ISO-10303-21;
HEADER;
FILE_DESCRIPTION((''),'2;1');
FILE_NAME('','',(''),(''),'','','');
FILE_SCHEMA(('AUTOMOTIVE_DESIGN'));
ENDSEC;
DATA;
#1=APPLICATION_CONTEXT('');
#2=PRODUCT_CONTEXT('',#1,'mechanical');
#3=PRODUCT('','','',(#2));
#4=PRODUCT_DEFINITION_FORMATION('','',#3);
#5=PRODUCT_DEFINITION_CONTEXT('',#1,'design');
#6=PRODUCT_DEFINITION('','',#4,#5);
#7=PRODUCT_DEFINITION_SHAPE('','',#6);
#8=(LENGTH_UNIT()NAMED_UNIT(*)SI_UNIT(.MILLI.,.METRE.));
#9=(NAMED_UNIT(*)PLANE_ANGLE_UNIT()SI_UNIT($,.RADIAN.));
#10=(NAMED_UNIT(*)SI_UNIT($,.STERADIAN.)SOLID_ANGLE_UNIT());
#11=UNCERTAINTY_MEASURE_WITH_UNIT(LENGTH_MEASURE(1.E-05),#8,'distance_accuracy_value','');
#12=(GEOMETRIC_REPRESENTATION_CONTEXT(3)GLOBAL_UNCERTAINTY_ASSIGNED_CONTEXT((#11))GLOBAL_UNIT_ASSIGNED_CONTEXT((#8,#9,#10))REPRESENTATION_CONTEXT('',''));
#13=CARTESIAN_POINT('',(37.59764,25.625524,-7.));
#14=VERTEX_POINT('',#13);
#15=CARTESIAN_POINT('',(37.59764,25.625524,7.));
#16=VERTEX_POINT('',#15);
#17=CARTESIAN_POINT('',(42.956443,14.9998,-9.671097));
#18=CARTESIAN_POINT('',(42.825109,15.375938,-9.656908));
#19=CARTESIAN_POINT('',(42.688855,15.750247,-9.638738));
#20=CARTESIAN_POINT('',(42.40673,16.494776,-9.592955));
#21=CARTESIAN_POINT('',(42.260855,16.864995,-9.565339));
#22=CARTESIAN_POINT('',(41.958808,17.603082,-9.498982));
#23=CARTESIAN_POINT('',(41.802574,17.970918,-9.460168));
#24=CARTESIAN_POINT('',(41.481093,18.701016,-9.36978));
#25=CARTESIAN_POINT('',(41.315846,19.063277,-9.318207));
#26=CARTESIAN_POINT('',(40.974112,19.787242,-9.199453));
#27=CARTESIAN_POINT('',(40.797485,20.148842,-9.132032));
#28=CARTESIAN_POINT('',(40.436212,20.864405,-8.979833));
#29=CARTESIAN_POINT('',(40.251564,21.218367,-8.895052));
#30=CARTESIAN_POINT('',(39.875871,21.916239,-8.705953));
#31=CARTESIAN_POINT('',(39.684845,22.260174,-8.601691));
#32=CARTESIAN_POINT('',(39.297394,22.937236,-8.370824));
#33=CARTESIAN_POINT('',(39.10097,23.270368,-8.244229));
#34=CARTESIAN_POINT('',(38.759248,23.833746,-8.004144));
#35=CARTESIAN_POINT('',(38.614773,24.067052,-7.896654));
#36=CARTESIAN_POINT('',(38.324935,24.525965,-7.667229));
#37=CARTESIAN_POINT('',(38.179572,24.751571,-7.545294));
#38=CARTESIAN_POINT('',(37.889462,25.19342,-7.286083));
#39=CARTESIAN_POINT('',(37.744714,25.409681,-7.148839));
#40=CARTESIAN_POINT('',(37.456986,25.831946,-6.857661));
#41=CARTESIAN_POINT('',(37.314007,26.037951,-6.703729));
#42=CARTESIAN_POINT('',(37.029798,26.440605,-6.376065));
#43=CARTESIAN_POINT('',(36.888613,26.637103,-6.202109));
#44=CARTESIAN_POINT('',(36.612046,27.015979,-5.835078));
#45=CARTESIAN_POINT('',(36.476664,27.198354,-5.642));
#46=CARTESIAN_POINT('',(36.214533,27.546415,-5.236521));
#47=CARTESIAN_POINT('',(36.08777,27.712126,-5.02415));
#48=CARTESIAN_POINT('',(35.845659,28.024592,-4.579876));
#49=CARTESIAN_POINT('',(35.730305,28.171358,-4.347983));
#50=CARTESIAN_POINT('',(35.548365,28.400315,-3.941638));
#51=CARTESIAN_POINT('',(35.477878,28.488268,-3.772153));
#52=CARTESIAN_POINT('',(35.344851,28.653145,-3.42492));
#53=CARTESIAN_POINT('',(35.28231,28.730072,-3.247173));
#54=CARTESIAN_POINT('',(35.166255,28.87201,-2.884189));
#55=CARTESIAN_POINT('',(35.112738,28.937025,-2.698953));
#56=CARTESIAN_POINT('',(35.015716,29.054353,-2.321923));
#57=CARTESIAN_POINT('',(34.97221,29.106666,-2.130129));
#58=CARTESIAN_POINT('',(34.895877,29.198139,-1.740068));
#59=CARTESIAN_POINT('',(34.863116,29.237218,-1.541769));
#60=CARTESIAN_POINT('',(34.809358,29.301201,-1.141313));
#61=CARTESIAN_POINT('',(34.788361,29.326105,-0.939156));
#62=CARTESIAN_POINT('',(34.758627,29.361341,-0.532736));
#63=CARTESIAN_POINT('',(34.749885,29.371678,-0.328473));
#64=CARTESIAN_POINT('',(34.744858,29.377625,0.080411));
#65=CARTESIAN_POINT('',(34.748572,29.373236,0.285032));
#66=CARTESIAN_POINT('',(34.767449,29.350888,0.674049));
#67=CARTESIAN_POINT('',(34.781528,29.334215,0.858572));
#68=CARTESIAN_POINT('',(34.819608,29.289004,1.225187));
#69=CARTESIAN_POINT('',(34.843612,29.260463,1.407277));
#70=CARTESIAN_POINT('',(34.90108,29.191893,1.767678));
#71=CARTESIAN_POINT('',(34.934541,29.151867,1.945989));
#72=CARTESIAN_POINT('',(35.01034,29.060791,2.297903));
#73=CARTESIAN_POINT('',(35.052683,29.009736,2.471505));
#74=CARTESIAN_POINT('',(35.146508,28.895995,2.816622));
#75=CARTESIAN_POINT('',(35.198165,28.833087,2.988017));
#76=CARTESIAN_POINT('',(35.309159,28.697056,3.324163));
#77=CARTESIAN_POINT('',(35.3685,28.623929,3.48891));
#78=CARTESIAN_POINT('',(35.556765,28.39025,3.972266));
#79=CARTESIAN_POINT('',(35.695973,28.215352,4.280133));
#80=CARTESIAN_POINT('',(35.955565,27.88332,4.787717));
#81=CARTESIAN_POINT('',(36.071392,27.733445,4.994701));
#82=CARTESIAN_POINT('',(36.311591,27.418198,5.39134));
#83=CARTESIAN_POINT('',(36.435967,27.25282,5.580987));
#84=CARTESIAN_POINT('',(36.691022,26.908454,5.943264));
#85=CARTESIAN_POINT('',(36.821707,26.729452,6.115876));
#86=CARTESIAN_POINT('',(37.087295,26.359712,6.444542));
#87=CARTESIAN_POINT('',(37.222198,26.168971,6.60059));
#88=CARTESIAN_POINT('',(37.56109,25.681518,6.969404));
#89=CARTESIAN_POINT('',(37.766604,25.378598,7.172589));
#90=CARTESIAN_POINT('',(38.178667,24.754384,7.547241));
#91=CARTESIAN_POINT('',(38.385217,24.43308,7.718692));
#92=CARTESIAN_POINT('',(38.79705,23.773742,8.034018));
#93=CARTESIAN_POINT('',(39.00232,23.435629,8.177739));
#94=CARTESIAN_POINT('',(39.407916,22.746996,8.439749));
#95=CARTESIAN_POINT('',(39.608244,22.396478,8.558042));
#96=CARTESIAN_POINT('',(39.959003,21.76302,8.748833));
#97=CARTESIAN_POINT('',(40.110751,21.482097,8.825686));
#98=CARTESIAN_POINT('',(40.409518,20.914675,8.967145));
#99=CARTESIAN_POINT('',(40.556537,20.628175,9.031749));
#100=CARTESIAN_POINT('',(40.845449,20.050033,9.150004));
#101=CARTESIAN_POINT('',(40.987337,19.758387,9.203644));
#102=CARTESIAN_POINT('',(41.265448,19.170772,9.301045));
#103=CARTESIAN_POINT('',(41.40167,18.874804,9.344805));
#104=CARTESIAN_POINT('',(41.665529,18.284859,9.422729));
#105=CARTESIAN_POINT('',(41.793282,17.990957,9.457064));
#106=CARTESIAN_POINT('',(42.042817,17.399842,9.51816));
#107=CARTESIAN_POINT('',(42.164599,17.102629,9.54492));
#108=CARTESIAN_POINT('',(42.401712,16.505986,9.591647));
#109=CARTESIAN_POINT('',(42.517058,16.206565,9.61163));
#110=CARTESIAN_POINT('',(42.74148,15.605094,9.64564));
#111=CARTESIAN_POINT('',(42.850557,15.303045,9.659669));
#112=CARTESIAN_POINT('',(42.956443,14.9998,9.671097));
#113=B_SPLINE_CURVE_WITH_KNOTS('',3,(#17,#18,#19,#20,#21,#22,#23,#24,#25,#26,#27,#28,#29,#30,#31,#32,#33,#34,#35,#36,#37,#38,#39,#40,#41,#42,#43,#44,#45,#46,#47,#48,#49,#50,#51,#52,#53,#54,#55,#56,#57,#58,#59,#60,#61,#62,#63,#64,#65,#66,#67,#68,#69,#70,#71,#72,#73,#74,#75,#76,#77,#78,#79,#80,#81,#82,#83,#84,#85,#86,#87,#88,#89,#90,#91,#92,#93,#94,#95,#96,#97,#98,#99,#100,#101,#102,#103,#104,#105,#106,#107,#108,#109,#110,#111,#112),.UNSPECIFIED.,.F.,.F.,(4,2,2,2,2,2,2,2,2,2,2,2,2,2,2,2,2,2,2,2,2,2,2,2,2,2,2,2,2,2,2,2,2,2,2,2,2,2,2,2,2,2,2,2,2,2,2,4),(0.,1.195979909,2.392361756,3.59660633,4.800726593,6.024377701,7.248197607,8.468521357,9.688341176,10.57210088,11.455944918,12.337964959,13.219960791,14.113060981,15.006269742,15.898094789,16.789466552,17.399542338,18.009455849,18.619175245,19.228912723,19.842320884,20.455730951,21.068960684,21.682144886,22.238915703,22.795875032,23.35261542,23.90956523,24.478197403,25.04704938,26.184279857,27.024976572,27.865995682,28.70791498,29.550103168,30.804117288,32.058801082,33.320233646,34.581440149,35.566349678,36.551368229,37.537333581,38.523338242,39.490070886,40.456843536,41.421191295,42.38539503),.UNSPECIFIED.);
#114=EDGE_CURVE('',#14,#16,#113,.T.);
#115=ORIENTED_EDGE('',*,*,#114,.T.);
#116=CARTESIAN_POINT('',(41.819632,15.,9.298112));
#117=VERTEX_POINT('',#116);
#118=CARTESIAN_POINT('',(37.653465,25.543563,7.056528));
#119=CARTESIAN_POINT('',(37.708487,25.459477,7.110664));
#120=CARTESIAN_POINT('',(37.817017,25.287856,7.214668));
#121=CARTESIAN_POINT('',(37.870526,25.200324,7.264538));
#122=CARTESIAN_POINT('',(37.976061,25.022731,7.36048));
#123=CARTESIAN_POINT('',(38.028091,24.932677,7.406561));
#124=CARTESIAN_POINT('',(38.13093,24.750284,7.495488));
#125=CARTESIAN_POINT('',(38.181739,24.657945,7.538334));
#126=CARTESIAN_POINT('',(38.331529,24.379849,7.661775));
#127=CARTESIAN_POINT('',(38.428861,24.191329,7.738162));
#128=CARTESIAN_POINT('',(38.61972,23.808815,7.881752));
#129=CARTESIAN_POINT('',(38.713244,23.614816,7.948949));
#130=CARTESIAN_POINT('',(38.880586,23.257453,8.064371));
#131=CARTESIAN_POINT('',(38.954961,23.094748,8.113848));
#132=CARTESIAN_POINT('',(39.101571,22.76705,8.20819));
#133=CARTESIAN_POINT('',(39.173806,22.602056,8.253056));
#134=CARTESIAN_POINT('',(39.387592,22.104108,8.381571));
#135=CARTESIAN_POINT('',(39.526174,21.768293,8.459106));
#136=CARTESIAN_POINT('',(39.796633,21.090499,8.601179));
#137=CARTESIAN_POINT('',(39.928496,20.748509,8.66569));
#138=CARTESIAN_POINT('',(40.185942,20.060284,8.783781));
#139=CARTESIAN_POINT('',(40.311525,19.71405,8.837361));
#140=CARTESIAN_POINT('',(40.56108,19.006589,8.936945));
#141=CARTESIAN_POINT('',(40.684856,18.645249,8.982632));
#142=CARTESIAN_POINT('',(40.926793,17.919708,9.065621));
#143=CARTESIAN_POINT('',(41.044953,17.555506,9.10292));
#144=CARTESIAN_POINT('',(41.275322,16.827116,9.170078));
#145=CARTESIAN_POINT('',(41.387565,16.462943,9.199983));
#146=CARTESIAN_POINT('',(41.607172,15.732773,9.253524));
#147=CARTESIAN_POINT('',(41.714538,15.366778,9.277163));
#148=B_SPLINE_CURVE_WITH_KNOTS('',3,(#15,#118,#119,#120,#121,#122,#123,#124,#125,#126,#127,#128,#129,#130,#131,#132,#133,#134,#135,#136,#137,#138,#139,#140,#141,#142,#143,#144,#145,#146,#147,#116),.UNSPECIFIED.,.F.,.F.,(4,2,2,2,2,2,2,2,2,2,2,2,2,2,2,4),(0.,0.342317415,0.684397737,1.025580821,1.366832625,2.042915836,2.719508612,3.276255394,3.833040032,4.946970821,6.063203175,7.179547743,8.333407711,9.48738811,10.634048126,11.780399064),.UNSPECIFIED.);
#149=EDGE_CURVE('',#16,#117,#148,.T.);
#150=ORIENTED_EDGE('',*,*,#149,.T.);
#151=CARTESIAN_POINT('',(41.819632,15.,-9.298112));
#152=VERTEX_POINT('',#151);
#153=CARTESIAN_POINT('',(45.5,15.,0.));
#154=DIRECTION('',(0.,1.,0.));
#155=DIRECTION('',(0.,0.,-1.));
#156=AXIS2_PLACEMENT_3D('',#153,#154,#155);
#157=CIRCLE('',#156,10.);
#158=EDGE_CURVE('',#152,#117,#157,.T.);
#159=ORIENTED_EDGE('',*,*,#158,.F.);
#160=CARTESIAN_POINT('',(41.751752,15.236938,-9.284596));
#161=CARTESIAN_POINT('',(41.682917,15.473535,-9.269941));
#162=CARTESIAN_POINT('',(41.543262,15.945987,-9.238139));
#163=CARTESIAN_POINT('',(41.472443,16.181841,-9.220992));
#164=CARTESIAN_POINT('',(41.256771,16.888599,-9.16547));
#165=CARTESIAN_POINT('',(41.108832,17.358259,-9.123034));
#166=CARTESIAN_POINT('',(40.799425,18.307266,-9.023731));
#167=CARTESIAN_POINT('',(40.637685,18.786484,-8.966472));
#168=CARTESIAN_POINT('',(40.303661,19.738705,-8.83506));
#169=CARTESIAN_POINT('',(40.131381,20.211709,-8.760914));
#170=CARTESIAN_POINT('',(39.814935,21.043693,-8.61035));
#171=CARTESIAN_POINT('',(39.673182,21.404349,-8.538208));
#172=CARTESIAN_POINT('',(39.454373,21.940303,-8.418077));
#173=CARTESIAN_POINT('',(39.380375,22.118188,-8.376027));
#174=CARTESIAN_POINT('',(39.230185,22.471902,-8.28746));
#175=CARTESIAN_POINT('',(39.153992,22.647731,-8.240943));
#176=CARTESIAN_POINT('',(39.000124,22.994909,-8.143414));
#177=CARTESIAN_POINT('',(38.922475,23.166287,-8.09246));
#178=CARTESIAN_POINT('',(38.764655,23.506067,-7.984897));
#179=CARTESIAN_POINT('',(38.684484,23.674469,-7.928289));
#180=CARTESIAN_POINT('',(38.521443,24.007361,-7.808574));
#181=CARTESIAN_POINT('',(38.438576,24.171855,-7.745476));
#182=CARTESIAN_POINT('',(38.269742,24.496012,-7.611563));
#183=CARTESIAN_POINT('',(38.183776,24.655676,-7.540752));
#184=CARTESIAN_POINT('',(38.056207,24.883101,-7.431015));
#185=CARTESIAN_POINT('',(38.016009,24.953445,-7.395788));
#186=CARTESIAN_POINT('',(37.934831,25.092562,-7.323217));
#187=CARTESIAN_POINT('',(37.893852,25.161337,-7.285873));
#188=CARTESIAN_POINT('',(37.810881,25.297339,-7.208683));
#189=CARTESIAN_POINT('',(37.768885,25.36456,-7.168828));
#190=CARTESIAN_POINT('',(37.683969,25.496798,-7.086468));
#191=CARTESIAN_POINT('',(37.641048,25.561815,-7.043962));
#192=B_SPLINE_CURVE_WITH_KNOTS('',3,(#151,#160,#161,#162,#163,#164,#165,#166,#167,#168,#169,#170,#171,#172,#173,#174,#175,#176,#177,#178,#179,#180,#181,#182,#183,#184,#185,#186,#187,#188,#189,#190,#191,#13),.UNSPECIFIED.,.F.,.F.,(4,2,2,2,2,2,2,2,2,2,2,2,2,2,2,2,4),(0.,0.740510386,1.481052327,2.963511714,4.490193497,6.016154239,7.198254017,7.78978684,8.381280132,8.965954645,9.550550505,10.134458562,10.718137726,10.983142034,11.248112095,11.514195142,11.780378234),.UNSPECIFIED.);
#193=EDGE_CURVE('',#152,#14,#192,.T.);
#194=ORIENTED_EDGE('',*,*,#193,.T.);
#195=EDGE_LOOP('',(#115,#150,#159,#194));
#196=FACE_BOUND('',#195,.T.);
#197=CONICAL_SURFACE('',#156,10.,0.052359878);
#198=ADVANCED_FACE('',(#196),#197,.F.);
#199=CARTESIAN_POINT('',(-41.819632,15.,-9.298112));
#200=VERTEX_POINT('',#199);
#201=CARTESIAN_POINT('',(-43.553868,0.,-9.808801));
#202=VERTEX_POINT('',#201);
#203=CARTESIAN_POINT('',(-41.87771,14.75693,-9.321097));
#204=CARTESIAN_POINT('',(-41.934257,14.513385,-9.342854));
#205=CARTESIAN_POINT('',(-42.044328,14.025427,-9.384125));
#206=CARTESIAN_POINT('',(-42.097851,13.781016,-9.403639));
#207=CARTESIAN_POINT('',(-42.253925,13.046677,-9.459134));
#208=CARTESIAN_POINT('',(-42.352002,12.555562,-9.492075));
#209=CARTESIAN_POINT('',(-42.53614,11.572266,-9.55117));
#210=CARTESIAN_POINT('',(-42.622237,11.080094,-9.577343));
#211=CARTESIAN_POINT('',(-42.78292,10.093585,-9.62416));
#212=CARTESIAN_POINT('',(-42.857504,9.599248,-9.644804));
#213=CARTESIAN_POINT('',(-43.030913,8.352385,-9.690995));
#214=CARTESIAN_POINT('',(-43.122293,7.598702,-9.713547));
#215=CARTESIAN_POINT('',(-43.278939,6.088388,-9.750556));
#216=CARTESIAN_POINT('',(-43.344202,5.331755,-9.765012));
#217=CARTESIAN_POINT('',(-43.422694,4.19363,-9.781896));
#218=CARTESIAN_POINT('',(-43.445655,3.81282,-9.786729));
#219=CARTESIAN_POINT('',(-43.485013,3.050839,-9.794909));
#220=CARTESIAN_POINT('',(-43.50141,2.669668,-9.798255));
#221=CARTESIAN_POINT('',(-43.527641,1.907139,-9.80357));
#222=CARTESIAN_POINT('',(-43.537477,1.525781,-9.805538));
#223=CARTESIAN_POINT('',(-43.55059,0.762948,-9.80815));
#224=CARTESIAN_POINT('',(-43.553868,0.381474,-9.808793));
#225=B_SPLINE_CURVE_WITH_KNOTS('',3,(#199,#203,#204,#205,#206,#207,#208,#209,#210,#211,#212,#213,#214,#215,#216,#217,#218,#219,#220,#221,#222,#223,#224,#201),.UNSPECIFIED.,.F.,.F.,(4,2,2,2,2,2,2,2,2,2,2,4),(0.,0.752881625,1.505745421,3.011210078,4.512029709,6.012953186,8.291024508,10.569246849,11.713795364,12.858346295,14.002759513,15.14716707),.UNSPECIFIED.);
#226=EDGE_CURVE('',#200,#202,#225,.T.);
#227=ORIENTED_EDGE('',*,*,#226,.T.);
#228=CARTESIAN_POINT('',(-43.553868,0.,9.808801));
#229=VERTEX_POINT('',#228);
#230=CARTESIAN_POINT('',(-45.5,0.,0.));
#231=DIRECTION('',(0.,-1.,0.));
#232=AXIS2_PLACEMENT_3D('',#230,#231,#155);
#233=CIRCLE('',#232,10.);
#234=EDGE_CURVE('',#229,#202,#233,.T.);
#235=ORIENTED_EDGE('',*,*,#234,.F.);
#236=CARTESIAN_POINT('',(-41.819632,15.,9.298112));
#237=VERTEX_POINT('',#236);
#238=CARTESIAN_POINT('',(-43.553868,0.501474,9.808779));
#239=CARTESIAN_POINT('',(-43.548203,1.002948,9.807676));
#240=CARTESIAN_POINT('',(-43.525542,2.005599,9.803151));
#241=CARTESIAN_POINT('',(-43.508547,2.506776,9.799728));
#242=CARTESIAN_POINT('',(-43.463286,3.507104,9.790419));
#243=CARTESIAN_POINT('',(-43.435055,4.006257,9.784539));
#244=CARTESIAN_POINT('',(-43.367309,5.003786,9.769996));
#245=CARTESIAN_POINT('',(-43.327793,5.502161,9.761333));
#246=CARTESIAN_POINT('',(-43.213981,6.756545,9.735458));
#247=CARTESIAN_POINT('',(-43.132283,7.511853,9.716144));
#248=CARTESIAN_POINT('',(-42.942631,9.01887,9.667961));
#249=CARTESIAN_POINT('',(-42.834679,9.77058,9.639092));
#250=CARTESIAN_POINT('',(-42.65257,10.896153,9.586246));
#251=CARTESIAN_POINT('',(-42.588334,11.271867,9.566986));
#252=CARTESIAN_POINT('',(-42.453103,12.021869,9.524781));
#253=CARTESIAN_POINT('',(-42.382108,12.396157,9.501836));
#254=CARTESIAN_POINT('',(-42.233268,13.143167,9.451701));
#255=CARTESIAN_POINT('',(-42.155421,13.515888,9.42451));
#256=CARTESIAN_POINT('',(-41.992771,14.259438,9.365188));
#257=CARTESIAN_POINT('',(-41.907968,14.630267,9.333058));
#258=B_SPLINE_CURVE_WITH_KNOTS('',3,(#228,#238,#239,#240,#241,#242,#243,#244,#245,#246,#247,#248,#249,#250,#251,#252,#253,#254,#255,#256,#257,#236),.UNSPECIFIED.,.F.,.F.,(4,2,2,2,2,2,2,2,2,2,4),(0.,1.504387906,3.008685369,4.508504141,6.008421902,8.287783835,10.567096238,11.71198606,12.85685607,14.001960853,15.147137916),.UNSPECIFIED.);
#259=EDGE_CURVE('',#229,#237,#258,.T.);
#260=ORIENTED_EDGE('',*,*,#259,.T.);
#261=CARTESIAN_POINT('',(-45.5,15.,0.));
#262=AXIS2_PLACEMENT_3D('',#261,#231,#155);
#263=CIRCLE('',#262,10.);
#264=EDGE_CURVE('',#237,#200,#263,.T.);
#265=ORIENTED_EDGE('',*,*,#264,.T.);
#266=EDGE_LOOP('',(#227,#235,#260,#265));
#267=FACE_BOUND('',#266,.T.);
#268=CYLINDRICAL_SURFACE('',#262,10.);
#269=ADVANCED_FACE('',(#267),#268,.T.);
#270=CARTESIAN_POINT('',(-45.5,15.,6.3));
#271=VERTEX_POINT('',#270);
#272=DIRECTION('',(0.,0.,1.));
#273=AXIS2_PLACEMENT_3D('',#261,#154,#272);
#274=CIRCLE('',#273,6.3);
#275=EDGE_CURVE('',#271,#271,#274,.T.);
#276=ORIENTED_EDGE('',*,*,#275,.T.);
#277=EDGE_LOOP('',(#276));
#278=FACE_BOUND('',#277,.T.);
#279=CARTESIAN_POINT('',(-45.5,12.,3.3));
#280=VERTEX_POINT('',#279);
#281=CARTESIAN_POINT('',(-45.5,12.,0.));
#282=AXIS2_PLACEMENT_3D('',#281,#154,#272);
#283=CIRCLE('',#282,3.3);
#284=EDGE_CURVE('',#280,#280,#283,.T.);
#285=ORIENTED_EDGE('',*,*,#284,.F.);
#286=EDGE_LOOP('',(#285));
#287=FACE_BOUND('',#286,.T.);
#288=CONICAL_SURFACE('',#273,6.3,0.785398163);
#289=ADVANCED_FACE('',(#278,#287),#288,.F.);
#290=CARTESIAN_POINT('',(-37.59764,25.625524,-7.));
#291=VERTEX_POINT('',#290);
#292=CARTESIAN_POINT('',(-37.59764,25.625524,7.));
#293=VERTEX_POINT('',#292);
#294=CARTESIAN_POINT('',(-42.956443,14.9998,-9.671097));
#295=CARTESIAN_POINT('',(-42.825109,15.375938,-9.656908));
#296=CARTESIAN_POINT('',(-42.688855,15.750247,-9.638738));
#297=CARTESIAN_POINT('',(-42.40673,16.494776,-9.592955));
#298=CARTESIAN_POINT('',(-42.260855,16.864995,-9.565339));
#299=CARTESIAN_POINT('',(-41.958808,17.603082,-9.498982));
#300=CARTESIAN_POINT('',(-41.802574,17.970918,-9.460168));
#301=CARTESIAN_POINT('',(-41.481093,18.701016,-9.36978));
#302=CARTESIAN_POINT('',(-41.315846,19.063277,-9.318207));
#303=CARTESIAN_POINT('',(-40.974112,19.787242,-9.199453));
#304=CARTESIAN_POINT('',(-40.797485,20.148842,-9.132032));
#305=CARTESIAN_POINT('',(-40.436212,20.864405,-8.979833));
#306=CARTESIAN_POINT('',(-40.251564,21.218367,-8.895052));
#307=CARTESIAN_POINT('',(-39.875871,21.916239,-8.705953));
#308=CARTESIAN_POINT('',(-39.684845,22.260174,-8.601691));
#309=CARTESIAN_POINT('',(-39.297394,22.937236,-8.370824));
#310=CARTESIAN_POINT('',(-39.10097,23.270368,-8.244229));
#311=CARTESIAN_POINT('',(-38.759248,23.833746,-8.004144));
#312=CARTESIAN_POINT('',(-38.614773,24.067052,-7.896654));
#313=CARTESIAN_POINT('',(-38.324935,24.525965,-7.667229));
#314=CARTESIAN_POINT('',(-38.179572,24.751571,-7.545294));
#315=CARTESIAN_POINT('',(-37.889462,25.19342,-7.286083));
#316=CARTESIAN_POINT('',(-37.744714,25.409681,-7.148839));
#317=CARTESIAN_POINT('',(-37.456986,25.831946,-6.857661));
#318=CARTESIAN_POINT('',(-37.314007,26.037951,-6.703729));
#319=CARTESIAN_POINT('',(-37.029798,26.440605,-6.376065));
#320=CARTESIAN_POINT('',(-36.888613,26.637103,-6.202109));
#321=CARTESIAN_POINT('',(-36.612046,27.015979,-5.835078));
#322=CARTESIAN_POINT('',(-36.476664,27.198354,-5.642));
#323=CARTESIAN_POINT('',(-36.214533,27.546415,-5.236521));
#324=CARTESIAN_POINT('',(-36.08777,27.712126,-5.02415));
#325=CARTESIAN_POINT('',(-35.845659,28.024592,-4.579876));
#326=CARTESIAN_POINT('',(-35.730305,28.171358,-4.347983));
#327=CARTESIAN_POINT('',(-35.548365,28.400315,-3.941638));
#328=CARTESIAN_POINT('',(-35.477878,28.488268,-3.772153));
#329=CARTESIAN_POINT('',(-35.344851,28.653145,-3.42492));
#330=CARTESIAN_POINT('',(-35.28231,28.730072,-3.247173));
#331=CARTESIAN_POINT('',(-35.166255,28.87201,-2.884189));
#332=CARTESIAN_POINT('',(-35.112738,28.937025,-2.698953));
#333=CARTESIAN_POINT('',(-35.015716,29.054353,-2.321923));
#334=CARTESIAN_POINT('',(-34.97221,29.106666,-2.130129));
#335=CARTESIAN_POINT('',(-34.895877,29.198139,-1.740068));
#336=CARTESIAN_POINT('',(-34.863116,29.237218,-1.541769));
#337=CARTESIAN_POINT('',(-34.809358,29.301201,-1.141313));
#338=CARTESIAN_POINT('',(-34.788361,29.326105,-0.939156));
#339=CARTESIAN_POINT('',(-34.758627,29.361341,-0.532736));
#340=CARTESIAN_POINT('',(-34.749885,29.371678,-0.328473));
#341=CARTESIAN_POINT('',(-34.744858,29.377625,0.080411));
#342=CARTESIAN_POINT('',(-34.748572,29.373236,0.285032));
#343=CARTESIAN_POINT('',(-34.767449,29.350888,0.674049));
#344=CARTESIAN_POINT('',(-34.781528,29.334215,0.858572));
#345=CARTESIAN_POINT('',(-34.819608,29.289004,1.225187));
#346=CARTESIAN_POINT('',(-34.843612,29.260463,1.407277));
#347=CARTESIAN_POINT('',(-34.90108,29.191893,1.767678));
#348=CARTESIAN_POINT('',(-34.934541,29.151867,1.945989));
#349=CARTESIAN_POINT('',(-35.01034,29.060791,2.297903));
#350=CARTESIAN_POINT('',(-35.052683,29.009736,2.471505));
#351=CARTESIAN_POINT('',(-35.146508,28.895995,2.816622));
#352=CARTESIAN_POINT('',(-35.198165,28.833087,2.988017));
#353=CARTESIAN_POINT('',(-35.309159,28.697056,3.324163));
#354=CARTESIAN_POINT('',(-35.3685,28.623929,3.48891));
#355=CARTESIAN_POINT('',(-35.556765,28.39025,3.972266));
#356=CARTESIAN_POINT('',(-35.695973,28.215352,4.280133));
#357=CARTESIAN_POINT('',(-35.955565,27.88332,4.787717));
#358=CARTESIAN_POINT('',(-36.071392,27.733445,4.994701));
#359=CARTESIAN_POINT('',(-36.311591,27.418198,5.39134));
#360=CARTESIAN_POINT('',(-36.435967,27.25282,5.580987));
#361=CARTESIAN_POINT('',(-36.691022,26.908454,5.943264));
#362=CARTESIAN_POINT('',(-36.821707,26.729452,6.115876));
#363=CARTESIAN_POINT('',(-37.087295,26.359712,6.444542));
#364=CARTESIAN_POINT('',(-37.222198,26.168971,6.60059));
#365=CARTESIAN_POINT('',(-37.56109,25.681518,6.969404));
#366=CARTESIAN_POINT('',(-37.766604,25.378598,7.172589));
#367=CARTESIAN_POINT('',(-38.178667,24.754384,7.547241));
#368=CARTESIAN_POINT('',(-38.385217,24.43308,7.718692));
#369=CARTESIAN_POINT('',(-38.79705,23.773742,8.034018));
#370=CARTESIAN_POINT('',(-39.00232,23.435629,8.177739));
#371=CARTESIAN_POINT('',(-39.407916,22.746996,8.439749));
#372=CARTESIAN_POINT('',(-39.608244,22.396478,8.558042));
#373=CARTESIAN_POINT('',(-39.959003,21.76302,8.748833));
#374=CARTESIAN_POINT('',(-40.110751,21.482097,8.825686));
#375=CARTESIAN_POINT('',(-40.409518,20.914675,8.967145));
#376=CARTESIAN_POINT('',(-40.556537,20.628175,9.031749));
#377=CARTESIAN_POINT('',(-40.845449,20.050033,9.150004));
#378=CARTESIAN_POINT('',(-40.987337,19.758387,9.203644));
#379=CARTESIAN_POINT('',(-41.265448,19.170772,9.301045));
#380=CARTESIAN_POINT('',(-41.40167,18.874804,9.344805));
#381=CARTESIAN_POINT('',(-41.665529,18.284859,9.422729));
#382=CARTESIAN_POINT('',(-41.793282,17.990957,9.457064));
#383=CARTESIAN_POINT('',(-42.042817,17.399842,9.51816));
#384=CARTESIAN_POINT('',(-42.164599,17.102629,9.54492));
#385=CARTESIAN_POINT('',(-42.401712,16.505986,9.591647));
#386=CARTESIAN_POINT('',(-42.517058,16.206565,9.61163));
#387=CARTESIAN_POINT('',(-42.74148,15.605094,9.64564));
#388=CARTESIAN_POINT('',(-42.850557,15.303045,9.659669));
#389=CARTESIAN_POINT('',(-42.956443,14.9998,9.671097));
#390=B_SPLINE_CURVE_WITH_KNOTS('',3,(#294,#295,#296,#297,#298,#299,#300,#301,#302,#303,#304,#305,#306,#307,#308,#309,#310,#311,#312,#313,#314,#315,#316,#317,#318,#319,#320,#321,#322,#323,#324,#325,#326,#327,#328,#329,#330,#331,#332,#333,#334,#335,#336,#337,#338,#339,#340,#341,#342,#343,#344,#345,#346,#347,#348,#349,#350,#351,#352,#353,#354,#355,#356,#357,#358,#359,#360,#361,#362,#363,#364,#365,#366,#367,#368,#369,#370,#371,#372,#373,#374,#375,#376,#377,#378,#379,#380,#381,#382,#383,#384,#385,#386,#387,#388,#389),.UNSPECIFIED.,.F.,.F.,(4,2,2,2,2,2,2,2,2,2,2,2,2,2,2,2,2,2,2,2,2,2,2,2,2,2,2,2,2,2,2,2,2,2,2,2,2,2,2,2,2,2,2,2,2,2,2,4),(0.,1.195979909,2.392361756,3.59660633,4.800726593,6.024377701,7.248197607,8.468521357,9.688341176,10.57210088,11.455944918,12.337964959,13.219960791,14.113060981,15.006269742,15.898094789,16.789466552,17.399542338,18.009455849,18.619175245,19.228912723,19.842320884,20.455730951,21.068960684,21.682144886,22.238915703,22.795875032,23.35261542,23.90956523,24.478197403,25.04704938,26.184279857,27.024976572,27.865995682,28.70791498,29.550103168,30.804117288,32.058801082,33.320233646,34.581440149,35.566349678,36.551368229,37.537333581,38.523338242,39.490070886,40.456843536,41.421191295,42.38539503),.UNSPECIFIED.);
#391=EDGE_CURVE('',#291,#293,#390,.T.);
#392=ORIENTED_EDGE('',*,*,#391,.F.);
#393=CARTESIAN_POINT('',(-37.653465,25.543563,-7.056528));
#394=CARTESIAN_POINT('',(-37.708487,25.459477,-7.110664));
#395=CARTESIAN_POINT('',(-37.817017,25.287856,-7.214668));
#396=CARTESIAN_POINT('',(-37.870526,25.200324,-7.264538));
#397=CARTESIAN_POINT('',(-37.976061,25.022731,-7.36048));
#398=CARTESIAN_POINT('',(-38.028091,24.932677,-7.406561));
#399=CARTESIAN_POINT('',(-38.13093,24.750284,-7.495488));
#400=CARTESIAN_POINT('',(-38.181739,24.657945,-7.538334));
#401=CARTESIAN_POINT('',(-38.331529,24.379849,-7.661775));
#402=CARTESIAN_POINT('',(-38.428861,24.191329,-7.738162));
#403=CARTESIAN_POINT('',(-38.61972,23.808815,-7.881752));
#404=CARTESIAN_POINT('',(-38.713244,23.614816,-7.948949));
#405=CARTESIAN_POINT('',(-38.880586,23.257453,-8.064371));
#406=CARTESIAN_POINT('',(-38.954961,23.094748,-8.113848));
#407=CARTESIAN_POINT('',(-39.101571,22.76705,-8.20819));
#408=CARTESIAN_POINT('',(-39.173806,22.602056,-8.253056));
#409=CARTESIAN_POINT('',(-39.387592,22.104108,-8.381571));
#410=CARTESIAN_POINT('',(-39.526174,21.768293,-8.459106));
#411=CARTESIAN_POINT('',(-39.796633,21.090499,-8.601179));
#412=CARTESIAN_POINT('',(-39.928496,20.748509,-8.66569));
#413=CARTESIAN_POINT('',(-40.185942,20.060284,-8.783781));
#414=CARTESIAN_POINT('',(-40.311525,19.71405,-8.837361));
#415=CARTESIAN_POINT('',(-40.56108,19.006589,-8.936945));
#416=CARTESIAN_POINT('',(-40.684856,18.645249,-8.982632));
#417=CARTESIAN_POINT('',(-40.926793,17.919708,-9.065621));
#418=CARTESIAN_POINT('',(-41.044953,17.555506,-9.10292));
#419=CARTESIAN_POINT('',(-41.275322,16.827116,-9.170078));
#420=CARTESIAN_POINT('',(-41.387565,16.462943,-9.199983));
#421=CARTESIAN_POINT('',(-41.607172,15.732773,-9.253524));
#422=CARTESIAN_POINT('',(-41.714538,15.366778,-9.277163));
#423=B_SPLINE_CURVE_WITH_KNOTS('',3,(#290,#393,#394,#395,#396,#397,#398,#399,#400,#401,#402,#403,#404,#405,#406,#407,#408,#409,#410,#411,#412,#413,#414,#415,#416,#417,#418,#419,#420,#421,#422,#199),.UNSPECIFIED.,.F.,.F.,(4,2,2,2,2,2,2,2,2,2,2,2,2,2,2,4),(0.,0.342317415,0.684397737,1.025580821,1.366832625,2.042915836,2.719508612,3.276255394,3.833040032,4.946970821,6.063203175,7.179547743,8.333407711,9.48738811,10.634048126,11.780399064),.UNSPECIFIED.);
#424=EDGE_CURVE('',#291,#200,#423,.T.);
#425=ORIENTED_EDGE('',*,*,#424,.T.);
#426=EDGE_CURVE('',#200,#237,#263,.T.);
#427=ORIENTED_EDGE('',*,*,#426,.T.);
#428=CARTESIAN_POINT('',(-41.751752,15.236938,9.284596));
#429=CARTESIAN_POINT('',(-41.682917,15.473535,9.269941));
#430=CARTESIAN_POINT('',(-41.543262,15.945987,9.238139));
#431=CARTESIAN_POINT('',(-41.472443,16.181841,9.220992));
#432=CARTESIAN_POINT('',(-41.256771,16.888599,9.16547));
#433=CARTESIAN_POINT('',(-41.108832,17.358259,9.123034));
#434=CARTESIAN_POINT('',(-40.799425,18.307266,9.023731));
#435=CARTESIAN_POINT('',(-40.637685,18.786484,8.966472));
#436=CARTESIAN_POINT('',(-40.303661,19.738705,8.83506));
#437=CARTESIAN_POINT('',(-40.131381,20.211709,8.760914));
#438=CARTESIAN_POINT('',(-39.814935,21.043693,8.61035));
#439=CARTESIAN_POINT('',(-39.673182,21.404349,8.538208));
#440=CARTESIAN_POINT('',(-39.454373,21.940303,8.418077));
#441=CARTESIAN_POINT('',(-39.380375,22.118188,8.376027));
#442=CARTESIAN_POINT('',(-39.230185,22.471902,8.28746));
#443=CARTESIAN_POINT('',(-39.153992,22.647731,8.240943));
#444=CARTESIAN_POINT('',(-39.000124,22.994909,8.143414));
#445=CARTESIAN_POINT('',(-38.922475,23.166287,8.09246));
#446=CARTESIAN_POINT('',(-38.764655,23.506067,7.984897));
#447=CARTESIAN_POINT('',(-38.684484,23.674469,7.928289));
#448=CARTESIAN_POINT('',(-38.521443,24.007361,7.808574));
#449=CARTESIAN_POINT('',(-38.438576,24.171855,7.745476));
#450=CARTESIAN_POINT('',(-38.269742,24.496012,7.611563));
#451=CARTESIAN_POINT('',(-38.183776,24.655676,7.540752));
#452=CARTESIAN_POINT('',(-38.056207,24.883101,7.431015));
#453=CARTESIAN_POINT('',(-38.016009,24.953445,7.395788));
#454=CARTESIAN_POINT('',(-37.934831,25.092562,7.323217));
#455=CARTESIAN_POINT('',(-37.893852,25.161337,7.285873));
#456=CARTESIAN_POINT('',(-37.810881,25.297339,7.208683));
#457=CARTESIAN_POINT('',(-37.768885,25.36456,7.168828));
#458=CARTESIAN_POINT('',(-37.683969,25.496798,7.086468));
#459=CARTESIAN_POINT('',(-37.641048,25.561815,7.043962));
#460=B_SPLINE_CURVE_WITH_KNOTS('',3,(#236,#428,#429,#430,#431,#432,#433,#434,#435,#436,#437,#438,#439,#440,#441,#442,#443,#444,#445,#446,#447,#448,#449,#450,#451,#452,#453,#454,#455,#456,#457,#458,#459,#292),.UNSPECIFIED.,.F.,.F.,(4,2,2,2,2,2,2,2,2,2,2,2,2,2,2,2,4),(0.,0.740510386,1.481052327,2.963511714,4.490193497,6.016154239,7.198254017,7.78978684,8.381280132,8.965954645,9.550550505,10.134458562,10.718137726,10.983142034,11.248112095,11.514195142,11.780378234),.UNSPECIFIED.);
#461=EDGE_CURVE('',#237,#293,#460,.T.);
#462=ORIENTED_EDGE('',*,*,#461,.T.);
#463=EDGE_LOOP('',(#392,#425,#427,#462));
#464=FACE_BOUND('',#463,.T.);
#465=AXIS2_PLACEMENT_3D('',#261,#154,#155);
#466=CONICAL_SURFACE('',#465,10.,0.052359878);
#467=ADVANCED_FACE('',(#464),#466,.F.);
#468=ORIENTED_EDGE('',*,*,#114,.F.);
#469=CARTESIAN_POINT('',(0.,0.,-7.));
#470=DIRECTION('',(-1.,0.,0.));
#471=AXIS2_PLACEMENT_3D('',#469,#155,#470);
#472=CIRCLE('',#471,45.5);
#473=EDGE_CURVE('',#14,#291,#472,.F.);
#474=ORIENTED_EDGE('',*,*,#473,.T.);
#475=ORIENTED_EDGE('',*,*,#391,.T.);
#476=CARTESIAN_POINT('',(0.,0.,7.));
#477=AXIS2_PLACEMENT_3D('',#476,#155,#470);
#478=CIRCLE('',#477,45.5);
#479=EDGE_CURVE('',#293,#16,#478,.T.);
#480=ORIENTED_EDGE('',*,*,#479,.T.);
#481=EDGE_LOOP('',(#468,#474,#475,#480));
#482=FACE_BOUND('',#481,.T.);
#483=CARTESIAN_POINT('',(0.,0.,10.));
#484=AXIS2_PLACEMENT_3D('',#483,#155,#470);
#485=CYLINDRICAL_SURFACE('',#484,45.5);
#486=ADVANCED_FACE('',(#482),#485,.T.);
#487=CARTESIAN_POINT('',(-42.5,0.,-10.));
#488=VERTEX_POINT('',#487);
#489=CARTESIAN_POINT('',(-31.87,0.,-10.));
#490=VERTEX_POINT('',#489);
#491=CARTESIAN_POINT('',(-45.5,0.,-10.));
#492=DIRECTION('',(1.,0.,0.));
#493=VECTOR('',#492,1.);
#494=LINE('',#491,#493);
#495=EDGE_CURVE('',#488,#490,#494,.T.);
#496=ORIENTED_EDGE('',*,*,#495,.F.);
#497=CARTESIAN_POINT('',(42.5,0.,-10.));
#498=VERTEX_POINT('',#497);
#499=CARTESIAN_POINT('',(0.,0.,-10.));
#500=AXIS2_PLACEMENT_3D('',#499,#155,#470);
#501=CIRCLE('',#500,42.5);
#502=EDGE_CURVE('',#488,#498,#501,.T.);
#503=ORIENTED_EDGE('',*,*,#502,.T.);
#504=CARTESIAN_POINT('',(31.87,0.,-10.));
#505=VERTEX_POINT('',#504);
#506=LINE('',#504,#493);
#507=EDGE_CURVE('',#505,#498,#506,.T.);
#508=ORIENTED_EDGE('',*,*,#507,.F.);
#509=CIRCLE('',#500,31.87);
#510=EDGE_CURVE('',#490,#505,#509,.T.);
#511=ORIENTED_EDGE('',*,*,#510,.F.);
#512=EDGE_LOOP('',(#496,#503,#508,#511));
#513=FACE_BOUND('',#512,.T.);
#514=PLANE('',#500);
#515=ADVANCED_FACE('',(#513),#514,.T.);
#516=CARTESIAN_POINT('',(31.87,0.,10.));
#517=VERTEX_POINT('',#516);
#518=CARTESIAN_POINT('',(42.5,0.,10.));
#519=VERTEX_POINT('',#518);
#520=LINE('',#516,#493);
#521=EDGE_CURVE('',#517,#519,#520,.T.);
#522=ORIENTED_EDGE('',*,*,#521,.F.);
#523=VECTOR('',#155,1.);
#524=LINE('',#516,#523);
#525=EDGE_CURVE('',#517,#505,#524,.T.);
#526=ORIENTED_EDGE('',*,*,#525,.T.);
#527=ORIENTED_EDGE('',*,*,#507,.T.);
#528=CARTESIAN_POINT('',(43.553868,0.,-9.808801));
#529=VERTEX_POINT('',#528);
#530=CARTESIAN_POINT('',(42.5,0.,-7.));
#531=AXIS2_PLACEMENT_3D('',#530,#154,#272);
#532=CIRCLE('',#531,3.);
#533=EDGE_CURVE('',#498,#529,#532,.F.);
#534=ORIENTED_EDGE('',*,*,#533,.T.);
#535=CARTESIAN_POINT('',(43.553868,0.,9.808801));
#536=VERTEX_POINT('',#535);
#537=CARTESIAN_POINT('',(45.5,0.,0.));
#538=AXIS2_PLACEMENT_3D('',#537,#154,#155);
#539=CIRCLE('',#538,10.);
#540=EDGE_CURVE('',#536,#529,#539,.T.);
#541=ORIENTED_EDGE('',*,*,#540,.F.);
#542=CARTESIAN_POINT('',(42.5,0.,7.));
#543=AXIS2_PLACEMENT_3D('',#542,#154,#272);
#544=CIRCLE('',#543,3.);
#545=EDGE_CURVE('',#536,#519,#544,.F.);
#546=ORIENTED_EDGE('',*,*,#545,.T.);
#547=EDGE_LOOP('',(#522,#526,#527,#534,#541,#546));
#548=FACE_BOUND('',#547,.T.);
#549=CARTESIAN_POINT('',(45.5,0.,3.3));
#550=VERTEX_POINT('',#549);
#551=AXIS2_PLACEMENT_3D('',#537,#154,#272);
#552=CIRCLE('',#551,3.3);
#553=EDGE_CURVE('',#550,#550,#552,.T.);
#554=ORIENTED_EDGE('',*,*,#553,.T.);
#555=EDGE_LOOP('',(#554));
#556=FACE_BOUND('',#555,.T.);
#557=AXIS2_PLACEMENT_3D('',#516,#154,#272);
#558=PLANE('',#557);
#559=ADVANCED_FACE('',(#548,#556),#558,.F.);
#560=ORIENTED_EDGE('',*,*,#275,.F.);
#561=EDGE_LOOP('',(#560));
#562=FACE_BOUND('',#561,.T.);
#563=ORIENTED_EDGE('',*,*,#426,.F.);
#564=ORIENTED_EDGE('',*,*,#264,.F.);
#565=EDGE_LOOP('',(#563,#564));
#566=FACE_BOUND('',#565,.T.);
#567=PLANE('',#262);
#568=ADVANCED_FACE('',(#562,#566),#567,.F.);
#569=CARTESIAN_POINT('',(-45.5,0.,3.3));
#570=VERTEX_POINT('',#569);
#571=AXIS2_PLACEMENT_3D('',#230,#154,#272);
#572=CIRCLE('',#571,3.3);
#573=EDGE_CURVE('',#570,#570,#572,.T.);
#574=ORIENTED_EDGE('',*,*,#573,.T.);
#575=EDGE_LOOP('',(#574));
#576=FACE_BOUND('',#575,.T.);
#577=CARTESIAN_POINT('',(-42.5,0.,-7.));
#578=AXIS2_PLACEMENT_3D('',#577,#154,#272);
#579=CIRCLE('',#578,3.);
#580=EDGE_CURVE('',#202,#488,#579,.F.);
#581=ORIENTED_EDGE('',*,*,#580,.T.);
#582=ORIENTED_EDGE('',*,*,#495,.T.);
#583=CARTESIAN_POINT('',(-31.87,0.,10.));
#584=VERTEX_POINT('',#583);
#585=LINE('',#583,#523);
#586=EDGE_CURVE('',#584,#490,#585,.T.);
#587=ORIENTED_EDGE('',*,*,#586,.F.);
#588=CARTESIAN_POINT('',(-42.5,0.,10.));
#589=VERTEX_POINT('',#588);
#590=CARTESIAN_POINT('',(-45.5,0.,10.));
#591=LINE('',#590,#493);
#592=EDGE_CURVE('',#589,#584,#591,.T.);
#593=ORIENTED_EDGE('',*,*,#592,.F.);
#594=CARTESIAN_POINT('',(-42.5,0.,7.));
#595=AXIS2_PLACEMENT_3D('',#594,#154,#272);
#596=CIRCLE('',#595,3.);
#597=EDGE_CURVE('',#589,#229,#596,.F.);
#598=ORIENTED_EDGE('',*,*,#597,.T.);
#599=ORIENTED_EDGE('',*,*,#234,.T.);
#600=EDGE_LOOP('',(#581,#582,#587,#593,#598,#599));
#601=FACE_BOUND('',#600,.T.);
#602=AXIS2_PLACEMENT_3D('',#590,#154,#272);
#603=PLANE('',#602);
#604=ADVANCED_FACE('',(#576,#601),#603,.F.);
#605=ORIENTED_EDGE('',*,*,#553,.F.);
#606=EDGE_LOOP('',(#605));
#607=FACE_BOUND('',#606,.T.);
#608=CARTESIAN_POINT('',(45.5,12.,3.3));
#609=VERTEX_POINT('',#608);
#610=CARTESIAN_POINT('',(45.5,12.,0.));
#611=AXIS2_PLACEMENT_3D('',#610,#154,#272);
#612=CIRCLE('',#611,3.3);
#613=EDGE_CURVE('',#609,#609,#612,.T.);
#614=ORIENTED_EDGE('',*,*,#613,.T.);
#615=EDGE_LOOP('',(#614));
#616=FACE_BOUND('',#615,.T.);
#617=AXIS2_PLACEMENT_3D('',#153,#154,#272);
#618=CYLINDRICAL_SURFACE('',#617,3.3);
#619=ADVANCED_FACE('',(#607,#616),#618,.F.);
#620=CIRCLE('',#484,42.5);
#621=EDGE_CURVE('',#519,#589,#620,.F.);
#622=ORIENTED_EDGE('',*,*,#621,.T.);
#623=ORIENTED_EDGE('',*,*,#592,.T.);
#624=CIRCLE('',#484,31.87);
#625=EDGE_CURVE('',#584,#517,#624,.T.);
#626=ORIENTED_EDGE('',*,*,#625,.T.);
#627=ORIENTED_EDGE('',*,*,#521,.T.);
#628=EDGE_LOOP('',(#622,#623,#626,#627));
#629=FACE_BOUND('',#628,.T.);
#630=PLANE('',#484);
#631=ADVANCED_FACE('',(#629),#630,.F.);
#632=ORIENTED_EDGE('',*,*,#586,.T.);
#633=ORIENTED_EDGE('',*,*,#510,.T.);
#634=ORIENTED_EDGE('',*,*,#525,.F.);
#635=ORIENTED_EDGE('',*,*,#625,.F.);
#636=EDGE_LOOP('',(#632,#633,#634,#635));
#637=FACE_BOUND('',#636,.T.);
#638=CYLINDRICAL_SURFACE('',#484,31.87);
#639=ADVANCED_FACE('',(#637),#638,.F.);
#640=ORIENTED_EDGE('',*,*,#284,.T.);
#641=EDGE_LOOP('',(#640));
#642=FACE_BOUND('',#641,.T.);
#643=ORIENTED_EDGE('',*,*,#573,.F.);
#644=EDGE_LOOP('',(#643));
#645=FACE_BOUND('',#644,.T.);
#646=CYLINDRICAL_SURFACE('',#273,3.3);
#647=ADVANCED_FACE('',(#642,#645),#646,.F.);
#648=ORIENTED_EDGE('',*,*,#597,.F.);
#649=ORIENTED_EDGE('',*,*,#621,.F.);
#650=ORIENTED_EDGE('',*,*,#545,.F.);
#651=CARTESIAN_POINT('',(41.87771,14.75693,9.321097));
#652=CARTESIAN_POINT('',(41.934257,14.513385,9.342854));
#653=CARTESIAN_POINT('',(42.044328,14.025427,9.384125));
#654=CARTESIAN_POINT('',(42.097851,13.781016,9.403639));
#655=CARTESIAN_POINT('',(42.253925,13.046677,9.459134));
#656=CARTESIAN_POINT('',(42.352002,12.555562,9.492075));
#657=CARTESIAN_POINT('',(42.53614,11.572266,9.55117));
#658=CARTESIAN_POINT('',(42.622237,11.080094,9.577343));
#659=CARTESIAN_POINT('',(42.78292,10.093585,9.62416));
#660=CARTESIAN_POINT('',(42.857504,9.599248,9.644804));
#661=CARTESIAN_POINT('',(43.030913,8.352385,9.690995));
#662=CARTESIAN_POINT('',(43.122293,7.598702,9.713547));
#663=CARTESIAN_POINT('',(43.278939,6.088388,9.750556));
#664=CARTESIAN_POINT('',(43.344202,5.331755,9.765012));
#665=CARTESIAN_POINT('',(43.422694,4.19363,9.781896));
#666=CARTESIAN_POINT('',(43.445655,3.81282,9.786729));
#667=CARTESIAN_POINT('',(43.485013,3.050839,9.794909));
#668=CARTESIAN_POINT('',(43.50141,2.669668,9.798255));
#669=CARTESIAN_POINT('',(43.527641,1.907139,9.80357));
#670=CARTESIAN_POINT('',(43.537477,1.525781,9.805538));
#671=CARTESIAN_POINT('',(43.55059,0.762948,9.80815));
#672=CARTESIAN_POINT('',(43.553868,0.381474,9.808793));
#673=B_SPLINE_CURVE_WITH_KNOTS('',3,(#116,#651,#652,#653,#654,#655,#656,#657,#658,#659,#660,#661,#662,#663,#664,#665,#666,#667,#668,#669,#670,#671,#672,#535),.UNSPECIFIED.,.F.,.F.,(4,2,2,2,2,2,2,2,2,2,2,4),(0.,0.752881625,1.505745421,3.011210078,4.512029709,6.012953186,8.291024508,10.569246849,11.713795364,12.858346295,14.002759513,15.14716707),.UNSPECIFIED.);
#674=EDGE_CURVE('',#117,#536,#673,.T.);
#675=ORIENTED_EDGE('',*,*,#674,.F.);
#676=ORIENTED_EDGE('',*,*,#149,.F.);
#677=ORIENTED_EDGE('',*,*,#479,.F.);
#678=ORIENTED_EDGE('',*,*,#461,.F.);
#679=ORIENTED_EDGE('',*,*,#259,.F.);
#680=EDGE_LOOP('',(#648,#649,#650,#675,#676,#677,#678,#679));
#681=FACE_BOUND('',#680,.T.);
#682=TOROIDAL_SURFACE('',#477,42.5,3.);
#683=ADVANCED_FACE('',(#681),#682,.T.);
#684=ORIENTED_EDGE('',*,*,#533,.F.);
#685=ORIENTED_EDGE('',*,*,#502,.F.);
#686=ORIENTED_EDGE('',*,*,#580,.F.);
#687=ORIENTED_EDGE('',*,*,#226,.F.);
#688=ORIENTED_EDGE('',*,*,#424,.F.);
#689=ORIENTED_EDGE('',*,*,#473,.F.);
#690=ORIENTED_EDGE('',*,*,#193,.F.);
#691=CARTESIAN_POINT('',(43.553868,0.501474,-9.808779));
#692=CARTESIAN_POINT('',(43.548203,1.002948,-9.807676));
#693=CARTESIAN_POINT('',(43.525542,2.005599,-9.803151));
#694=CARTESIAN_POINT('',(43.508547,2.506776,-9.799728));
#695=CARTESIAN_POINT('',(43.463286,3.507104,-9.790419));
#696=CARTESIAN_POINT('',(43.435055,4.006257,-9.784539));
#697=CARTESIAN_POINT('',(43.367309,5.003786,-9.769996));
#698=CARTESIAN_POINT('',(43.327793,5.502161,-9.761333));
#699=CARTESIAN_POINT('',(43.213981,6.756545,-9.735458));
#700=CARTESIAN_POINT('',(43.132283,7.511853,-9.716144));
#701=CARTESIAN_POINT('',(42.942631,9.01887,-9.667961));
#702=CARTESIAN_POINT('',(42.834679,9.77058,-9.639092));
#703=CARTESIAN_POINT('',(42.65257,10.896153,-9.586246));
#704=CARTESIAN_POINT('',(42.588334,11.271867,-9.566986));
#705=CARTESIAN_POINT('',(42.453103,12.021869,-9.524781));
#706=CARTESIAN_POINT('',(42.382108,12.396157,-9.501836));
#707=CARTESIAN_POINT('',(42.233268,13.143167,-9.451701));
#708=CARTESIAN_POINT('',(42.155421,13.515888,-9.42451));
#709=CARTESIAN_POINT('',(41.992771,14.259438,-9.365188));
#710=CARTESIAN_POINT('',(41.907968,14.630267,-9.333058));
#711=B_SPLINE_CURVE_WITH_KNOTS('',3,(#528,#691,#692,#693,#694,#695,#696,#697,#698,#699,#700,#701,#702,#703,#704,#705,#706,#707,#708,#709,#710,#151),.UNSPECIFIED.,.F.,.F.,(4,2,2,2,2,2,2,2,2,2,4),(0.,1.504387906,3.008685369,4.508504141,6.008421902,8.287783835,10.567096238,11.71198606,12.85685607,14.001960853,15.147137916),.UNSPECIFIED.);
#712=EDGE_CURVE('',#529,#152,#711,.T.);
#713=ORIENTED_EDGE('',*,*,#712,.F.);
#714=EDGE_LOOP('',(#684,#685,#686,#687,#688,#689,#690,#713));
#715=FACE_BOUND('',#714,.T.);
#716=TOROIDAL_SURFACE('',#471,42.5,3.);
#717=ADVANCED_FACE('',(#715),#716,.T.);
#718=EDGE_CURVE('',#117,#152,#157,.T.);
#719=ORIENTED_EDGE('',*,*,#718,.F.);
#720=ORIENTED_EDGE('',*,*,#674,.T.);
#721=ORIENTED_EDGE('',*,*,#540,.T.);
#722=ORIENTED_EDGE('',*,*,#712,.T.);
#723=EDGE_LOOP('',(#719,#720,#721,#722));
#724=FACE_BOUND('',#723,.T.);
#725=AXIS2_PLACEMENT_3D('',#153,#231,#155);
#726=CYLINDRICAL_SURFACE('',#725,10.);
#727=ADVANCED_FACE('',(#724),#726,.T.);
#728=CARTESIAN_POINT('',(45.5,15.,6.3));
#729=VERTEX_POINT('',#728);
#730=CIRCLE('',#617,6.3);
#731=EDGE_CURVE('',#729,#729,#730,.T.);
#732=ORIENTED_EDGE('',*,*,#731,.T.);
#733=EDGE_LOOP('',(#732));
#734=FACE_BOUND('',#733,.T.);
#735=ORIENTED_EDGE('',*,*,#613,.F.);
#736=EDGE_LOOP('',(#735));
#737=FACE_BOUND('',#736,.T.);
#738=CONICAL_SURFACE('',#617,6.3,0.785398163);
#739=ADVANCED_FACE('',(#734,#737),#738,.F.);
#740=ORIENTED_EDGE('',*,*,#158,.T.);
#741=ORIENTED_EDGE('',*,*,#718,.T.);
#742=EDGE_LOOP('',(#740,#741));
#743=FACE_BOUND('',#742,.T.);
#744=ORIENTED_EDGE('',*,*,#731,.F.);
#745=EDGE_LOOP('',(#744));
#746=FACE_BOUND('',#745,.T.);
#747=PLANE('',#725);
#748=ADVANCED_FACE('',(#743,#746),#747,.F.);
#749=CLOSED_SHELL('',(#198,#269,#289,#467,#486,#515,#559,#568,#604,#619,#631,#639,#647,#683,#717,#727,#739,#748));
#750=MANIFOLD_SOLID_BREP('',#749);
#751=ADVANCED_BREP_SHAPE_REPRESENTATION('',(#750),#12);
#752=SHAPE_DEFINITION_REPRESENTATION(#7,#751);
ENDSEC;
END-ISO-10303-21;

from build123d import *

# Parameters (mm, degrees)
BOSS_EXTRUDE1_DEPTH                             = 10
SKETCH2_R                                       = 10
BOSS_EXTRUDE2_DEPTH                             = 15
CUT_EXTRUDE1_START                              = -15
SKETCH2_2_R                                     = 10
CUT_EXTRUDE1_DEPTH                              = 45
CUT_EXTRUDE1_DRAFT                              = 3
CSK_FOR_M6_FLAT_HEAD_MACHINE_SCREW1_D           = 6.6
CSK_FOR_M6_FLAT_HEAD_MACHINE_SCREW1_CSINK_D     = 12.6
CSK_FOR_M6_FLAT_HEAD_MACHINE_SCREW1_CSINK_ANGLE = 90
MIRROR1_START                                   = -15
MIRROR1_COPY_1_SKETCH_R                         = 10
MIRROR1_COPY_1_DEPTH                            = 45
MIRROR1_COPY_1_DRAFT                            = 3
FILLET1_R                                       = 3


with BuildPart() as part:
    # Sketch1 → Boss-Extrude1 (new, symmetric)
    with BuildSketch(Plane.XY):
        with BuildLine():
            Line((-45.5, 0), (-31.87, 0))
            ThreePointArc((-31.87, 0), (0, 31.87), (31.87, 0))
            Line((31.87, 0), (45.5, 0))
            ThreePointArc((45.5, 0), (0, 45.5), (-45.5, 0))
        make_face()
    extrude(amount=BOSS_EXTRUDE1_DEPTH, both=True)

    # Sketch2 → Boss-Extrude2 (add)
    with BuildSketch(Plane.XZ):
        with Locations((-45.5, 0)):
            Circle(SKETCH2_R)
    boss_extrude2 = extrude(amount=-BOSS_EXTRUDE2_DEPTH)


with BuildPart() as cut_extrude1_tool:
    # Sketch2<2> → Cut-Extrude1 (with draft: the straight prism first)
    with BuildSketch(Plane.XZ.offset(CUT_EXTRUDE1_START)):
        with Locations((-45.5, 0)):
            Circle(SKETCH2_2_R)
    extrude(amount=-CUT_EXTRUDE1_DEPTH)
    # Cut-Extrude1: the draft: its side faces are tilted about the plane it starts from
    cut_extrude1_sides = [cut_extrude1_tool.faces().sort_by_distance(p)[0] for p in [
        (-55.5, 37.5, 0),
    ]]
    draft(cut_extrude1_sides, Plane.XZ.offset(CUT_EXTRUDE1_START), CUT_EXTRUDE1_DRAFT)


with BuildPart() as part_1:
    add(part.part)

    # Cut-Extrude1: cut by cut_extrude1_tool
    add(cut_extrude1_tool.part, mode=Mode.SUBTRACT)

    # CSK for M6 Flat Head Machine Screw1 (through all)
    with Locations(Plane(origin=(0, 15, 0), x_dir=(1, 0, 0), z_dir=(0, 1, 0))):
        with Locations((-45.5, 0)):
            csk_for_m6_flat_head_machine_screw1 = CounterSinkHole(CSK_FOR_M6_FLAT_HEAD_MACHINE_SCREW1_D / 2, CSK_FOR_M6_FLAT_HEAD_MACHINE_SCREW1_CSINK_D / 2, counter_sink_angle=CSK_FOR_M6_FLAT_HEAD_MACHINE_SCREW1_CSINK_ANGLE)

    # Mirror1: Boss-Extrude2, CSK for M6 Flat Head Machine Screw1 across plane
    add(boss_extrude2.mirror(Plane(origin=(0, 0, 0), x_dir=(0, 0, 1), z_dir=(1, 0, 0))))
    add(csk_for_m6_flat_head_machine_screw1.mirror(Plane(origin=(0, 0, 0), x_dir=(0, 0, 1), z_dir=(1, 0, 0))), mode=Mode.SUBTRACT)


with BuildPart() as mirror1_copy_1_tool:
    # Mirror1 copy 1 sketch → Mirror1 copy 1 (with draft: the straight prism first)
    with BuildSketch(Plane(origin=(0, 0, 0), x_dir=(-1, 0, 0), z_dir=(0, -1, 0)).offset(MIRROR1_START)):
        with Locations((-45.5, 0)):
            Circle(MIRROR1_COPY_1_SKETCH_R)
    extrude(amount=-MIRROR1_COPY_1_DEPTH)
    # Mirror1 copy 1: the draft: its side faces are tilted about the plane it starts from
    mirror1_copy_1_sides = [mirror1_copy_1_tool.faces().sort_by_distance(p)[0] for p in [
        (55.5, 37.5, 0),
    ]]
    draft(mirror1_copy_1_sides, Plane(origin=(0, 0, 0), x_dir=(-1, 0, 0), z_dir=(0, -1, 0)).offset(MIRROR1_START), MIRROR1_COPY_1_DRAFT)


with BuildPart() as part_2:
    add(part_1.part)

    # Mirror1 copy 1: cut by mirror1_copy_1_tool
    add(mirror1_copy_1_tool.part, mode=Mode.SUBTRACT)

    # Fillet1
    # the kernel refuses this fillet: 3 mm, written as the material it takes off along each edge
    with BuildSketch(Plane(origin=(0, 0, 10), x_dir=(0.9864018839376206, -0.1643512195400838, 0), z_dir=(-0.1643512195400838, -0.9864018839376206, 0))) as fillet1_piece_1_section:
        with BuildLine():
            CenterArc((45.5 - FILLET1_R, -FILLET1_R), FILLET1_R, 0, 90)
            Line((45.5 - FILLET1_R, 0), (45.5, 0))
            Line((45.5, 0), (45.5, -FILLET1_R))
        make_face()
    fillet1_piece_1 = revolve(axis=Axis((0, 0, 10), (0, 0, 1)), revolution_arc=198.919095152, mode=Mode.PRIVATE)
    fillet1_piece_1 = fillet1_piece_1 - Plane(origin=(-45.5, 9.787690876, 0), x_dir=(1, 0, 0), z_dir=(0, -1, 0)) * Cylinder(10, 182, mode=Mode.PRIVATE)
    fillet1_piece_1 = fillet1_piece_1 - Plane(origin=(45.5, 9.787690876, 0), x_dir=(-1, 0, 0), z_dir=(0, -1, 0)) * Cylinder(10, 182, mode=Mode.PRIVATE)
    add(fillet1_piece_1, mode=Mode.SUBTRACT)
    with BuildSketch(Plane(origin=(0, 0, -10), x_dir=(0.9864018839376206, -0.1643512195400838, 0), z_dir=(-0.1643512195400838, -0.9864018839376206, 0))) as fillet1_piece_2_section:
        with BuildLine():
            CenterArc((45.5 - FILLET1_R, FILLET1_R), FILLET1_R, 270, 90)
            Line((45.5 - FILLET1_R, 0), (45.5, 0))
            Line((45.5, 0), (45.5, FILLET1_R))
        make_face()
    fillet1_piece_2 = revolve(axis=Axis((0, 0, -10), (0, 0, 1)), revolution_arc=198.919095152, mode=Mode.PRIVATE)
    fillet1_piece_2 = fillet1_piece_2 - Plane(origin=(-45.5, 9.787689661, 0), x_dir=(1, 0, 0), z_dir=(0, -1, 0)) * Cylinder(10, 182, mode=Mode.PRIVATE)
    fillet1_piece_2 = fillet1_piece_2 - Plane(origin=(45.5, 9.787689661, 0), x_dir=(-1, 0, 0), z_dir=(0, -1, 0)) * Cylinder(10, 182, mode=Mode.PRIVATE)
    add(fillet1_piece_2, mode=Mode.SUBTRACT)


solid = part_2.part
